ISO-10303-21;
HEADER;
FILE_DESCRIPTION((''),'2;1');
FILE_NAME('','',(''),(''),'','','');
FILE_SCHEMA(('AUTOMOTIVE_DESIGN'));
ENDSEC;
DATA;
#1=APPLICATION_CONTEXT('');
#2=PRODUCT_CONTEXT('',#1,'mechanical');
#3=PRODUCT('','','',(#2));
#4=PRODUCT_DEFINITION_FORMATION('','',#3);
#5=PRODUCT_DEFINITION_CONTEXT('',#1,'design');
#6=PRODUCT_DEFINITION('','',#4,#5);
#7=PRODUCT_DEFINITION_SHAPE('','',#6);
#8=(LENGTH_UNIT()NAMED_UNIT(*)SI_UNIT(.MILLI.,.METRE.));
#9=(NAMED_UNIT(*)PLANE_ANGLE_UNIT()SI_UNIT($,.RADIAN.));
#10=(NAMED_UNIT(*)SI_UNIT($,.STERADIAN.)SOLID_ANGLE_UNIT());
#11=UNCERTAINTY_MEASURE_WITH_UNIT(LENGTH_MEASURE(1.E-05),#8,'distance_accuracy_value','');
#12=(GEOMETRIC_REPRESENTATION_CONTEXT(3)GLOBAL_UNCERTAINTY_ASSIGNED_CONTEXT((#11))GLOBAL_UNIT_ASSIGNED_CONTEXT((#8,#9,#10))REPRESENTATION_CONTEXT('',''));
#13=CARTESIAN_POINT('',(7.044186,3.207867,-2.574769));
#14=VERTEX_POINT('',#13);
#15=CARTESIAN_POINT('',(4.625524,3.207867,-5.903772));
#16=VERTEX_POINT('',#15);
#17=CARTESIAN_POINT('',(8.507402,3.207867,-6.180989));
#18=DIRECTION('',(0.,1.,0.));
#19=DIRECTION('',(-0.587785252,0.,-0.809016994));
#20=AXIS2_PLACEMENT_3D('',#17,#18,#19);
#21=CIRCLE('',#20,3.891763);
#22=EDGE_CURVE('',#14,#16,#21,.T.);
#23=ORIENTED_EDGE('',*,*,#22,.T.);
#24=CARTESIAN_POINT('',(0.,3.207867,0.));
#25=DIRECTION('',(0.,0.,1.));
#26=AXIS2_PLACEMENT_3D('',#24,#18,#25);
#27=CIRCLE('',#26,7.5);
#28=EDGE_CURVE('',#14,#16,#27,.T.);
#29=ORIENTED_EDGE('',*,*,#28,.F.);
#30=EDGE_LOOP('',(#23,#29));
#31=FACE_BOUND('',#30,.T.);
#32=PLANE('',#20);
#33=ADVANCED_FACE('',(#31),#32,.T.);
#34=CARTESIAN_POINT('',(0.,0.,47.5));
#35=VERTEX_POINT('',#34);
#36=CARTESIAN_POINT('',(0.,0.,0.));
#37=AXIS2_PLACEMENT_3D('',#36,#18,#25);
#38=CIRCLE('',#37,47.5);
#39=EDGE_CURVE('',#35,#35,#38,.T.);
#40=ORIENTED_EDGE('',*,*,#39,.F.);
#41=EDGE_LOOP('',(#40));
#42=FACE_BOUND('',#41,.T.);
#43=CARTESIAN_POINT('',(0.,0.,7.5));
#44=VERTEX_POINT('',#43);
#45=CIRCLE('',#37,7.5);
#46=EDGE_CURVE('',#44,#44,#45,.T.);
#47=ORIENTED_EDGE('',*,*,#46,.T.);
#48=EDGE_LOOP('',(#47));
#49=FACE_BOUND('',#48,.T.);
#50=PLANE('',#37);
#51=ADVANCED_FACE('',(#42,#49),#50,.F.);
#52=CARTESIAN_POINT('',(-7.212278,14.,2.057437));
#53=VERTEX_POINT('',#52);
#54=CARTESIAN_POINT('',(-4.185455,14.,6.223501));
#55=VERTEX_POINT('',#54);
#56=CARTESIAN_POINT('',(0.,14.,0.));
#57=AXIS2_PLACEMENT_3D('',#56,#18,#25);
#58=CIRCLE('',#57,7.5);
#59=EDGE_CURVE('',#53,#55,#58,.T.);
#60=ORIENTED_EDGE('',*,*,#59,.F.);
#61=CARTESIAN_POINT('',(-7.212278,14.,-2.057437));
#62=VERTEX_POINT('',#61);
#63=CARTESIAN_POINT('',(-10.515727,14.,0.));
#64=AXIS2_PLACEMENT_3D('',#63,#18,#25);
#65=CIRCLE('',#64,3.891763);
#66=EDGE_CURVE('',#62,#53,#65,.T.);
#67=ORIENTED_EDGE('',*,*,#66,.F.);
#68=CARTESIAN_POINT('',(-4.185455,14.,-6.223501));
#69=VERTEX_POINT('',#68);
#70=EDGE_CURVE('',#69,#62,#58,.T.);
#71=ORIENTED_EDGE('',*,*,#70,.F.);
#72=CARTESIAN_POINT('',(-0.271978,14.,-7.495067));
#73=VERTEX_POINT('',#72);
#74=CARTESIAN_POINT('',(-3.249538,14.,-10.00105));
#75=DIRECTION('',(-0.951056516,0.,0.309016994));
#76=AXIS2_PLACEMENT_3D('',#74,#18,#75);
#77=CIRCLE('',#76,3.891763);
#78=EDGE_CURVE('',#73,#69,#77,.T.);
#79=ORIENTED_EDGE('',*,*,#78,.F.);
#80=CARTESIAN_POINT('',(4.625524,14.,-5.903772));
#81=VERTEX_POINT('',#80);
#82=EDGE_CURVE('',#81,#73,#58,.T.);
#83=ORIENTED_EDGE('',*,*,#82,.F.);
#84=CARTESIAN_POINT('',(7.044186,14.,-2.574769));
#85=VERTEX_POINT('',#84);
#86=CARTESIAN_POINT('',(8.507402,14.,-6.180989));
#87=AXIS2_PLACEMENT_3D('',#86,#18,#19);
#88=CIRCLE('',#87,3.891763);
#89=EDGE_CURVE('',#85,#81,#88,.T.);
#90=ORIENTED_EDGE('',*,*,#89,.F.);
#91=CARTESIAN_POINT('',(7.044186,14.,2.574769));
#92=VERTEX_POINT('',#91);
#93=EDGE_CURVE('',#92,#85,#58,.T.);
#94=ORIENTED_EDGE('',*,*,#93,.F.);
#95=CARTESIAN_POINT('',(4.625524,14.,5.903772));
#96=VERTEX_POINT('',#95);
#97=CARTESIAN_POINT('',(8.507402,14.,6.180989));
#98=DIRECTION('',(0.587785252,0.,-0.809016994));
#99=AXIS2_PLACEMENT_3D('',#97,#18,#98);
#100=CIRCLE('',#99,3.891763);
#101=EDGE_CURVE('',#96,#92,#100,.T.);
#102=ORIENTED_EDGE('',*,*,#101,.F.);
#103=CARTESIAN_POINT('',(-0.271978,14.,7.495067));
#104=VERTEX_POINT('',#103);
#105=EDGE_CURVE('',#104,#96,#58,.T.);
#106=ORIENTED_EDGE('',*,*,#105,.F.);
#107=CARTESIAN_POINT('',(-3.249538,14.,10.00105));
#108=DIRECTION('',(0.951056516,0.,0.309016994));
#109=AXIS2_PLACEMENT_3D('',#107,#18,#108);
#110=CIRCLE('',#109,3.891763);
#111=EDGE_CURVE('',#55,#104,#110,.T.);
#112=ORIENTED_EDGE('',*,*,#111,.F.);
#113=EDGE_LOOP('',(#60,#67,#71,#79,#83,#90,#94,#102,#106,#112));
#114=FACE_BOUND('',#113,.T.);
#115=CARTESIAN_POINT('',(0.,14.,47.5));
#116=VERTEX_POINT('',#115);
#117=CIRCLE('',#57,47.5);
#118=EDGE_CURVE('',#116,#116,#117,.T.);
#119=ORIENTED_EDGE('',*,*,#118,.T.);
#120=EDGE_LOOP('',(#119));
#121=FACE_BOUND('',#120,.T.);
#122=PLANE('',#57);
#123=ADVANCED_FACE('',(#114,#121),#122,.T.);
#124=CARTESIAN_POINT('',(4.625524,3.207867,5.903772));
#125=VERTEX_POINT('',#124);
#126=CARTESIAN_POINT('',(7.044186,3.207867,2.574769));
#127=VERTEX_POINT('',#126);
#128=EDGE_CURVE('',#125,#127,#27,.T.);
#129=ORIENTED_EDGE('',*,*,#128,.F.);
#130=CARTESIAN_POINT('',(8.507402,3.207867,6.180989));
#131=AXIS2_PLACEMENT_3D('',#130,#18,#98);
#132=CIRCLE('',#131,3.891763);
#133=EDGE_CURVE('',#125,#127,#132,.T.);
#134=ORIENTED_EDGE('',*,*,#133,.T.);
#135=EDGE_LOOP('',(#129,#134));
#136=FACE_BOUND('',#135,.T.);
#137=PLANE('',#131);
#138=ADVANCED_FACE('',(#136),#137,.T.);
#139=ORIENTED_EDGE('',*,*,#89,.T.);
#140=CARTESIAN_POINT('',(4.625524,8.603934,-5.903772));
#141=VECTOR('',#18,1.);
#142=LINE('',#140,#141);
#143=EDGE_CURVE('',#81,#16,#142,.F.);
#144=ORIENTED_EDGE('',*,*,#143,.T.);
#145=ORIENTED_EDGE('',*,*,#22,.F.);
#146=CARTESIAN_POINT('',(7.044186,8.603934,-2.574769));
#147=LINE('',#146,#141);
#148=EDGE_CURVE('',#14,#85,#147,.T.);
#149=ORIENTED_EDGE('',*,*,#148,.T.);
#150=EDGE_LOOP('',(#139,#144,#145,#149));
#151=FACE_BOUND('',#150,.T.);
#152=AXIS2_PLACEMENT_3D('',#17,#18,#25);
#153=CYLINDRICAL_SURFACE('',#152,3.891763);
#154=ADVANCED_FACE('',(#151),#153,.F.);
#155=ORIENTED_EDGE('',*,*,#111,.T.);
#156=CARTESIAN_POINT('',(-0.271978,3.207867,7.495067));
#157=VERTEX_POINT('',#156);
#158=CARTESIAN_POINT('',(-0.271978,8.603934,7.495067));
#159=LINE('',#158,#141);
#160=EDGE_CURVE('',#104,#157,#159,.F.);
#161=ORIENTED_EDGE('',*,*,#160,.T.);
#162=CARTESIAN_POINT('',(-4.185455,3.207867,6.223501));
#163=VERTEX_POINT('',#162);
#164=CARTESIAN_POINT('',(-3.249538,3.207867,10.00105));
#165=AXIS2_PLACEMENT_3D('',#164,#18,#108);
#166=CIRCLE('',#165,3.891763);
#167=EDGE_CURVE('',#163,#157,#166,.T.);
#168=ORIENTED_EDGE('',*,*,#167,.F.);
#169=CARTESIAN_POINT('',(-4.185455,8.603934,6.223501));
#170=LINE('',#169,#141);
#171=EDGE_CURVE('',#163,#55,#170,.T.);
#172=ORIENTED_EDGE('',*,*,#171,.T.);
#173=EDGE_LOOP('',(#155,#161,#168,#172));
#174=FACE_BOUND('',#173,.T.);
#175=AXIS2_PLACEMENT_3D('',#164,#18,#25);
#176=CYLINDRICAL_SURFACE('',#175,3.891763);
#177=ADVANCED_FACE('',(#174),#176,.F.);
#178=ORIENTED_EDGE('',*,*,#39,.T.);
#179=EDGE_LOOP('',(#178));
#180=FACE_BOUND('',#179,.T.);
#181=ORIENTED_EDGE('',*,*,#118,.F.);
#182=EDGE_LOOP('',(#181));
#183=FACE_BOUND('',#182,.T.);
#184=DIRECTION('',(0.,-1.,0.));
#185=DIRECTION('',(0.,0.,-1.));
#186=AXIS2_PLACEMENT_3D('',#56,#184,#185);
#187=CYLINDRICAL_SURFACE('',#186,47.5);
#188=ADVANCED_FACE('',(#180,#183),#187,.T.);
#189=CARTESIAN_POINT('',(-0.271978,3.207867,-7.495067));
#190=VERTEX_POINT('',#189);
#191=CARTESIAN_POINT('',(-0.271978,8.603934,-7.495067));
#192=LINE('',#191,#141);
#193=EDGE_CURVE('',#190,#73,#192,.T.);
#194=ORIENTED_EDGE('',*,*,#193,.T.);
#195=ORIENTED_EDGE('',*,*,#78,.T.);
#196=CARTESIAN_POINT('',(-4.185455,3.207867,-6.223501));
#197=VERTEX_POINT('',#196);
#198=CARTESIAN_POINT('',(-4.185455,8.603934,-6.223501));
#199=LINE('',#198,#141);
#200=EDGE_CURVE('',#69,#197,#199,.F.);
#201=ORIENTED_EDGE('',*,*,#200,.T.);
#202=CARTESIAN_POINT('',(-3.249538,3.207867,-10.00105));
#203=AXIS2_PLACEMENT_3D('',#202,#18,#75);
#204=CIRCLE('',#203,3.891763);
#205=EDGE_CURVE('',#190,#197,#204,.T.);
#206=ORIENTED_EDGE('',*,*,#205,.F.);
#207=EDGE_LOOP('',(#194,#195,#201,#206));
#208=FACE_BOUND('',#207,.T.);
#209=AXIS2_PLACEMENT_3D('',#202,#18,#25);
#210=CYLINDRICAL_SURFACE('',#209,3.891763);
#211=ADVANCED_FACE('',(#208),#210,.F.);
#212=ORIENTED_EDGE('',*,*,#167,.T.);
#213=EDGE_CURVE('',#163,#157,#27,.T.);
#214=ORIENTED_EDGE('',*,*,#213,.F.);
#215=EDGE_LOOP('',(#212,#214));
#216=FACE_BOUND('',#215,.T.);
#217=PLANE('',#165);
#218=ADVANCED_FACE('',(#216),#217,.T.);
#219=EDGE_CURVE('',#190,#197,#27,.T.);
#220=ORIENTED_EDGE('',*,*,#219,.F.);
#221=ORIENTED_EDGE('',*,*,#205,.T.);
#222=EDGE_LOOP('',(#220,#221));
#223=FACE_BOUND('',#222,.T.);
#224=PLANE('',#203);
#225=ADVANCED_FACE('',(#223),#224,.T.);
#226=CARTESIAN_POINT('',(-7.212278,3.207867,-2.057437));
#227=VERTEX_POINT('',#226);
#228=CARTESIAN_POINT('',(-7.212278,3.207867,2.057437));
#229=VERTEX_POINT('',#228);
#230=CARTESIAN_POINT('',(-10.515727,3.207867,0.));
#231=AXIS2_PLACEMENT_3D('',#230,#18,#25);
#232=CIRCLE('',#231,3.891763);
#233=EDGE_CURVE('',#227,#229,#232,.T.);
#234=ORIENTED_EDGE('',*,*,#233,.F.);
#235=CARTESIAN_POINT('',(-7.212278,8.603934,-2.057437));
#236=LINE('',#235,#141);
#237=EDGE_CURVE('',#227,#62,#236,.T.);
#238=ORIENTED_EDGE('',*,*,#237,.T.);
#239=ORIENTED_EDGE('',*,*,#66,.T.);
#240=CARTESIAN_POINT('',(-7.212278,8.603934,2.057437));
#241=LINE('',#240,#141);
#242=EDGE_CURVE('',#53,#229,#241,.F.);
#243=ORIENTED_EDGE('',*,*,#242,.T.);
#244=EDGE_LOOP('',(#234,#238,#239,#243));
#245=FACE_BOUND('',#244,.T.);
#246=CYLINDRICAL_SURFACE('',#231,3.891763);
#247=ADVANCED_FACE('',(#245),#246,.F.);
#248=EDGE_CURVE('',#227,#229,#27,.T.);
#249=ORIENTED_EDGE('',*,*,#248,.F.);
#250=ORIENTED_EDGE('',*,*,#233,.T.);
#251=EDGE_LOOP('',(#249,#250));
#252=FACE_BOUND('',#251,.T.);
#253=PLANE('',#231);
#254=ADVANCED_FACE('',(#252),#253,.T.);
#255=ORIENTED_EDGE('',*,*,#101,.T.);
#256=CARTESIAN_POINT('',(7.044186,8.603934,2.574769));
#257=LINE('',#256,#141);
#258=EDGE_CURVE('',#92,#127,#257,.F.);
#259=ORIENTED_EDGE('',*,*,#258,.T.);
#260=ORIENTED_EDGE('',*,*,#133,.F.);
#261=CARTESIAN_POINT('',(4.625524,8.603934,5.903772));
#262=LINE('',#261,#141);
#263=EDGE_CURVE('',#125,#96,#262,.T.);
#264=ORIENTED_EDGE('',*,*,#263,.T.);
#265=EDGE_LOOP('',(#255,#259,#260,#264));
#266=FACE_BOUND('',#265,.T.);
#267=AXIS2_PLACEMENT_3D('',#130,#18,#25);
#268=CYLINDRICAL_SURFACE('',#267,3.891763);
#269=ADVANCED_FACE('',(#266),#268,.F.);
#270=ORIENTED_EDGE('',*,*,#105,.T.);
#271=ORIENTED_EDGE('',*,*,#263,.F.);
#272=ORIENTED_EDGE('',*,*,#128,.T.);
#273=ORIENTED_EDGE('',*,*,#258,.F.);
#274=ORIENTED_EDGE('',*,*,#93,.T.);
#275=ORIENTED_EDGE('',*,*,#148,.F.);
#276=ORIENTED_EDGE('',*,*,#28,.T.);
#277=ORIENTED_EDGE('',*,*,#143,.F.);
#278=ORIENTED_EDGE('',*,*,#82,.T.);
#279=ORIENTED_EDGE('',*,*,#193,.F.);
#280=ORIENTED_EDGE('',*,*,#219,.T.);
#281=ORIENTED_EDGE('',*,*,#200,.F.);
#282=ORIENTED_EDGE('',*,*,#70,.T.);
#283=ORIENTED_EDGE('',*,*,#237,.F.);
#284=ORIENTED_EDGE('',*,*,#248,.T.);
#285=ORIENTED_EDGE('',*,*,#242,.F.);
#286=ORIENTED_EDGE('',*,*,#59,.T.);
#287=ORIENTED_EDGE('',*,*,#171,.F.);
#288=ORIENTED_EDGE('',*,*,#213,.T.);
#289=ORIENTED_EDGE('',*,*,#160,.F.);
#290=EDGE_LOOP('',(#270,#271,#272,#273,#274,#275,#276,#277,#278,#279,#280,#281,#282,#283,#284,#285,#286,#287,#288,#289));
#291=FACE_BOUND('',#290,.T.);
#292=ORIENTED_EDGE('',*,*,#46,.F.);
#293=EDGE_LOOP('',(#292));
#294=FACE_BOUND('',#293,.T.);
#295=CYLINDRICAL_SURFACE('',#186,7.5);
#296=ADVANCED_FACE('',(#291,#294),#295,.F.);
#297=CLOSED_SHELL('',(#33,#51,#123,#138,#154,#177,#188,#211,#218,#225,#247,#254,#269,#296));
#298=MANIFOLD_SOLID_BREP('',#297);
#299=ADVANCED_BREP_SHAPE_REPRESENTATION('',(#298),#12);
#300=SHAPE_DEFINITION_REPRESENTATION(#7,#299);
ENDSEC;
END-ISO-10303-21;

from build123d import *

# Parameters (mm, degrees)
SKETCH1_R           = 47.5
BOSS_EXTRUDE1_DEPTH = 14
SKETCH2_R           = 7.5
CUT_EXTRUDE1_DEPTH  = 69.618510622
SKETCH3_R           = 3.891762976
CUT_EXTRUDE2_DEPTH  = 10.792132813
CIRPATTERN1_COUNT   = 5


with BuildPart() as part:
    # Sketch1 → Boss-Extrude1 (new body)
    with BuildSketch(Plane(origin=(0, 0, 0), x_dir=(1, 0, 0), z_dir=(0, 1, 0))):
        Circle(SKETCH1_R)
    extrude(amount=BOSS_EXTRUDE1_DEPTH)

    # Sketch2 → Cut-Extrude1 (cut, through all)
    with BuildSketch(Plane(origin=(0, 0, 0), x_dir=(1, 0, 0), z_dir=(0, 1, 0))):
        Circle(SKETCH2_R)
    extrude(amount=CUT_EXTRUDE1_DEPTH, mode=Mode.SUBTRACT)

    # Sketch3 → Cut-Extrude2 (cut)
    with BuildSketch(Plane(origin=(0, 14, 0), x_dir=(1, 0, 0), z_dir=(0, 1, 0))):
        with Locations((-10.51572659, 0)):
            Circle(SKETCH3_R)
    cut_extrude2 = extrude(amount=-CUT_EXTRUDE2_DEPTH, mode=Mode.SUBTRACT)

    # CirPattern1: Cut-Extrude2 ×5 about axis
    cirpattern1_axis = Axis((0, 0, 0), (0, 1, 0))
    for i in range(1, CIRPATTERN1_COUNT):
        add(cut_extrude2.rotate(cirpattern1_axis, i * 360 / CIRPATTERN1_COUNT), mode=Mode.SUBTRACT)


solid = part.part
